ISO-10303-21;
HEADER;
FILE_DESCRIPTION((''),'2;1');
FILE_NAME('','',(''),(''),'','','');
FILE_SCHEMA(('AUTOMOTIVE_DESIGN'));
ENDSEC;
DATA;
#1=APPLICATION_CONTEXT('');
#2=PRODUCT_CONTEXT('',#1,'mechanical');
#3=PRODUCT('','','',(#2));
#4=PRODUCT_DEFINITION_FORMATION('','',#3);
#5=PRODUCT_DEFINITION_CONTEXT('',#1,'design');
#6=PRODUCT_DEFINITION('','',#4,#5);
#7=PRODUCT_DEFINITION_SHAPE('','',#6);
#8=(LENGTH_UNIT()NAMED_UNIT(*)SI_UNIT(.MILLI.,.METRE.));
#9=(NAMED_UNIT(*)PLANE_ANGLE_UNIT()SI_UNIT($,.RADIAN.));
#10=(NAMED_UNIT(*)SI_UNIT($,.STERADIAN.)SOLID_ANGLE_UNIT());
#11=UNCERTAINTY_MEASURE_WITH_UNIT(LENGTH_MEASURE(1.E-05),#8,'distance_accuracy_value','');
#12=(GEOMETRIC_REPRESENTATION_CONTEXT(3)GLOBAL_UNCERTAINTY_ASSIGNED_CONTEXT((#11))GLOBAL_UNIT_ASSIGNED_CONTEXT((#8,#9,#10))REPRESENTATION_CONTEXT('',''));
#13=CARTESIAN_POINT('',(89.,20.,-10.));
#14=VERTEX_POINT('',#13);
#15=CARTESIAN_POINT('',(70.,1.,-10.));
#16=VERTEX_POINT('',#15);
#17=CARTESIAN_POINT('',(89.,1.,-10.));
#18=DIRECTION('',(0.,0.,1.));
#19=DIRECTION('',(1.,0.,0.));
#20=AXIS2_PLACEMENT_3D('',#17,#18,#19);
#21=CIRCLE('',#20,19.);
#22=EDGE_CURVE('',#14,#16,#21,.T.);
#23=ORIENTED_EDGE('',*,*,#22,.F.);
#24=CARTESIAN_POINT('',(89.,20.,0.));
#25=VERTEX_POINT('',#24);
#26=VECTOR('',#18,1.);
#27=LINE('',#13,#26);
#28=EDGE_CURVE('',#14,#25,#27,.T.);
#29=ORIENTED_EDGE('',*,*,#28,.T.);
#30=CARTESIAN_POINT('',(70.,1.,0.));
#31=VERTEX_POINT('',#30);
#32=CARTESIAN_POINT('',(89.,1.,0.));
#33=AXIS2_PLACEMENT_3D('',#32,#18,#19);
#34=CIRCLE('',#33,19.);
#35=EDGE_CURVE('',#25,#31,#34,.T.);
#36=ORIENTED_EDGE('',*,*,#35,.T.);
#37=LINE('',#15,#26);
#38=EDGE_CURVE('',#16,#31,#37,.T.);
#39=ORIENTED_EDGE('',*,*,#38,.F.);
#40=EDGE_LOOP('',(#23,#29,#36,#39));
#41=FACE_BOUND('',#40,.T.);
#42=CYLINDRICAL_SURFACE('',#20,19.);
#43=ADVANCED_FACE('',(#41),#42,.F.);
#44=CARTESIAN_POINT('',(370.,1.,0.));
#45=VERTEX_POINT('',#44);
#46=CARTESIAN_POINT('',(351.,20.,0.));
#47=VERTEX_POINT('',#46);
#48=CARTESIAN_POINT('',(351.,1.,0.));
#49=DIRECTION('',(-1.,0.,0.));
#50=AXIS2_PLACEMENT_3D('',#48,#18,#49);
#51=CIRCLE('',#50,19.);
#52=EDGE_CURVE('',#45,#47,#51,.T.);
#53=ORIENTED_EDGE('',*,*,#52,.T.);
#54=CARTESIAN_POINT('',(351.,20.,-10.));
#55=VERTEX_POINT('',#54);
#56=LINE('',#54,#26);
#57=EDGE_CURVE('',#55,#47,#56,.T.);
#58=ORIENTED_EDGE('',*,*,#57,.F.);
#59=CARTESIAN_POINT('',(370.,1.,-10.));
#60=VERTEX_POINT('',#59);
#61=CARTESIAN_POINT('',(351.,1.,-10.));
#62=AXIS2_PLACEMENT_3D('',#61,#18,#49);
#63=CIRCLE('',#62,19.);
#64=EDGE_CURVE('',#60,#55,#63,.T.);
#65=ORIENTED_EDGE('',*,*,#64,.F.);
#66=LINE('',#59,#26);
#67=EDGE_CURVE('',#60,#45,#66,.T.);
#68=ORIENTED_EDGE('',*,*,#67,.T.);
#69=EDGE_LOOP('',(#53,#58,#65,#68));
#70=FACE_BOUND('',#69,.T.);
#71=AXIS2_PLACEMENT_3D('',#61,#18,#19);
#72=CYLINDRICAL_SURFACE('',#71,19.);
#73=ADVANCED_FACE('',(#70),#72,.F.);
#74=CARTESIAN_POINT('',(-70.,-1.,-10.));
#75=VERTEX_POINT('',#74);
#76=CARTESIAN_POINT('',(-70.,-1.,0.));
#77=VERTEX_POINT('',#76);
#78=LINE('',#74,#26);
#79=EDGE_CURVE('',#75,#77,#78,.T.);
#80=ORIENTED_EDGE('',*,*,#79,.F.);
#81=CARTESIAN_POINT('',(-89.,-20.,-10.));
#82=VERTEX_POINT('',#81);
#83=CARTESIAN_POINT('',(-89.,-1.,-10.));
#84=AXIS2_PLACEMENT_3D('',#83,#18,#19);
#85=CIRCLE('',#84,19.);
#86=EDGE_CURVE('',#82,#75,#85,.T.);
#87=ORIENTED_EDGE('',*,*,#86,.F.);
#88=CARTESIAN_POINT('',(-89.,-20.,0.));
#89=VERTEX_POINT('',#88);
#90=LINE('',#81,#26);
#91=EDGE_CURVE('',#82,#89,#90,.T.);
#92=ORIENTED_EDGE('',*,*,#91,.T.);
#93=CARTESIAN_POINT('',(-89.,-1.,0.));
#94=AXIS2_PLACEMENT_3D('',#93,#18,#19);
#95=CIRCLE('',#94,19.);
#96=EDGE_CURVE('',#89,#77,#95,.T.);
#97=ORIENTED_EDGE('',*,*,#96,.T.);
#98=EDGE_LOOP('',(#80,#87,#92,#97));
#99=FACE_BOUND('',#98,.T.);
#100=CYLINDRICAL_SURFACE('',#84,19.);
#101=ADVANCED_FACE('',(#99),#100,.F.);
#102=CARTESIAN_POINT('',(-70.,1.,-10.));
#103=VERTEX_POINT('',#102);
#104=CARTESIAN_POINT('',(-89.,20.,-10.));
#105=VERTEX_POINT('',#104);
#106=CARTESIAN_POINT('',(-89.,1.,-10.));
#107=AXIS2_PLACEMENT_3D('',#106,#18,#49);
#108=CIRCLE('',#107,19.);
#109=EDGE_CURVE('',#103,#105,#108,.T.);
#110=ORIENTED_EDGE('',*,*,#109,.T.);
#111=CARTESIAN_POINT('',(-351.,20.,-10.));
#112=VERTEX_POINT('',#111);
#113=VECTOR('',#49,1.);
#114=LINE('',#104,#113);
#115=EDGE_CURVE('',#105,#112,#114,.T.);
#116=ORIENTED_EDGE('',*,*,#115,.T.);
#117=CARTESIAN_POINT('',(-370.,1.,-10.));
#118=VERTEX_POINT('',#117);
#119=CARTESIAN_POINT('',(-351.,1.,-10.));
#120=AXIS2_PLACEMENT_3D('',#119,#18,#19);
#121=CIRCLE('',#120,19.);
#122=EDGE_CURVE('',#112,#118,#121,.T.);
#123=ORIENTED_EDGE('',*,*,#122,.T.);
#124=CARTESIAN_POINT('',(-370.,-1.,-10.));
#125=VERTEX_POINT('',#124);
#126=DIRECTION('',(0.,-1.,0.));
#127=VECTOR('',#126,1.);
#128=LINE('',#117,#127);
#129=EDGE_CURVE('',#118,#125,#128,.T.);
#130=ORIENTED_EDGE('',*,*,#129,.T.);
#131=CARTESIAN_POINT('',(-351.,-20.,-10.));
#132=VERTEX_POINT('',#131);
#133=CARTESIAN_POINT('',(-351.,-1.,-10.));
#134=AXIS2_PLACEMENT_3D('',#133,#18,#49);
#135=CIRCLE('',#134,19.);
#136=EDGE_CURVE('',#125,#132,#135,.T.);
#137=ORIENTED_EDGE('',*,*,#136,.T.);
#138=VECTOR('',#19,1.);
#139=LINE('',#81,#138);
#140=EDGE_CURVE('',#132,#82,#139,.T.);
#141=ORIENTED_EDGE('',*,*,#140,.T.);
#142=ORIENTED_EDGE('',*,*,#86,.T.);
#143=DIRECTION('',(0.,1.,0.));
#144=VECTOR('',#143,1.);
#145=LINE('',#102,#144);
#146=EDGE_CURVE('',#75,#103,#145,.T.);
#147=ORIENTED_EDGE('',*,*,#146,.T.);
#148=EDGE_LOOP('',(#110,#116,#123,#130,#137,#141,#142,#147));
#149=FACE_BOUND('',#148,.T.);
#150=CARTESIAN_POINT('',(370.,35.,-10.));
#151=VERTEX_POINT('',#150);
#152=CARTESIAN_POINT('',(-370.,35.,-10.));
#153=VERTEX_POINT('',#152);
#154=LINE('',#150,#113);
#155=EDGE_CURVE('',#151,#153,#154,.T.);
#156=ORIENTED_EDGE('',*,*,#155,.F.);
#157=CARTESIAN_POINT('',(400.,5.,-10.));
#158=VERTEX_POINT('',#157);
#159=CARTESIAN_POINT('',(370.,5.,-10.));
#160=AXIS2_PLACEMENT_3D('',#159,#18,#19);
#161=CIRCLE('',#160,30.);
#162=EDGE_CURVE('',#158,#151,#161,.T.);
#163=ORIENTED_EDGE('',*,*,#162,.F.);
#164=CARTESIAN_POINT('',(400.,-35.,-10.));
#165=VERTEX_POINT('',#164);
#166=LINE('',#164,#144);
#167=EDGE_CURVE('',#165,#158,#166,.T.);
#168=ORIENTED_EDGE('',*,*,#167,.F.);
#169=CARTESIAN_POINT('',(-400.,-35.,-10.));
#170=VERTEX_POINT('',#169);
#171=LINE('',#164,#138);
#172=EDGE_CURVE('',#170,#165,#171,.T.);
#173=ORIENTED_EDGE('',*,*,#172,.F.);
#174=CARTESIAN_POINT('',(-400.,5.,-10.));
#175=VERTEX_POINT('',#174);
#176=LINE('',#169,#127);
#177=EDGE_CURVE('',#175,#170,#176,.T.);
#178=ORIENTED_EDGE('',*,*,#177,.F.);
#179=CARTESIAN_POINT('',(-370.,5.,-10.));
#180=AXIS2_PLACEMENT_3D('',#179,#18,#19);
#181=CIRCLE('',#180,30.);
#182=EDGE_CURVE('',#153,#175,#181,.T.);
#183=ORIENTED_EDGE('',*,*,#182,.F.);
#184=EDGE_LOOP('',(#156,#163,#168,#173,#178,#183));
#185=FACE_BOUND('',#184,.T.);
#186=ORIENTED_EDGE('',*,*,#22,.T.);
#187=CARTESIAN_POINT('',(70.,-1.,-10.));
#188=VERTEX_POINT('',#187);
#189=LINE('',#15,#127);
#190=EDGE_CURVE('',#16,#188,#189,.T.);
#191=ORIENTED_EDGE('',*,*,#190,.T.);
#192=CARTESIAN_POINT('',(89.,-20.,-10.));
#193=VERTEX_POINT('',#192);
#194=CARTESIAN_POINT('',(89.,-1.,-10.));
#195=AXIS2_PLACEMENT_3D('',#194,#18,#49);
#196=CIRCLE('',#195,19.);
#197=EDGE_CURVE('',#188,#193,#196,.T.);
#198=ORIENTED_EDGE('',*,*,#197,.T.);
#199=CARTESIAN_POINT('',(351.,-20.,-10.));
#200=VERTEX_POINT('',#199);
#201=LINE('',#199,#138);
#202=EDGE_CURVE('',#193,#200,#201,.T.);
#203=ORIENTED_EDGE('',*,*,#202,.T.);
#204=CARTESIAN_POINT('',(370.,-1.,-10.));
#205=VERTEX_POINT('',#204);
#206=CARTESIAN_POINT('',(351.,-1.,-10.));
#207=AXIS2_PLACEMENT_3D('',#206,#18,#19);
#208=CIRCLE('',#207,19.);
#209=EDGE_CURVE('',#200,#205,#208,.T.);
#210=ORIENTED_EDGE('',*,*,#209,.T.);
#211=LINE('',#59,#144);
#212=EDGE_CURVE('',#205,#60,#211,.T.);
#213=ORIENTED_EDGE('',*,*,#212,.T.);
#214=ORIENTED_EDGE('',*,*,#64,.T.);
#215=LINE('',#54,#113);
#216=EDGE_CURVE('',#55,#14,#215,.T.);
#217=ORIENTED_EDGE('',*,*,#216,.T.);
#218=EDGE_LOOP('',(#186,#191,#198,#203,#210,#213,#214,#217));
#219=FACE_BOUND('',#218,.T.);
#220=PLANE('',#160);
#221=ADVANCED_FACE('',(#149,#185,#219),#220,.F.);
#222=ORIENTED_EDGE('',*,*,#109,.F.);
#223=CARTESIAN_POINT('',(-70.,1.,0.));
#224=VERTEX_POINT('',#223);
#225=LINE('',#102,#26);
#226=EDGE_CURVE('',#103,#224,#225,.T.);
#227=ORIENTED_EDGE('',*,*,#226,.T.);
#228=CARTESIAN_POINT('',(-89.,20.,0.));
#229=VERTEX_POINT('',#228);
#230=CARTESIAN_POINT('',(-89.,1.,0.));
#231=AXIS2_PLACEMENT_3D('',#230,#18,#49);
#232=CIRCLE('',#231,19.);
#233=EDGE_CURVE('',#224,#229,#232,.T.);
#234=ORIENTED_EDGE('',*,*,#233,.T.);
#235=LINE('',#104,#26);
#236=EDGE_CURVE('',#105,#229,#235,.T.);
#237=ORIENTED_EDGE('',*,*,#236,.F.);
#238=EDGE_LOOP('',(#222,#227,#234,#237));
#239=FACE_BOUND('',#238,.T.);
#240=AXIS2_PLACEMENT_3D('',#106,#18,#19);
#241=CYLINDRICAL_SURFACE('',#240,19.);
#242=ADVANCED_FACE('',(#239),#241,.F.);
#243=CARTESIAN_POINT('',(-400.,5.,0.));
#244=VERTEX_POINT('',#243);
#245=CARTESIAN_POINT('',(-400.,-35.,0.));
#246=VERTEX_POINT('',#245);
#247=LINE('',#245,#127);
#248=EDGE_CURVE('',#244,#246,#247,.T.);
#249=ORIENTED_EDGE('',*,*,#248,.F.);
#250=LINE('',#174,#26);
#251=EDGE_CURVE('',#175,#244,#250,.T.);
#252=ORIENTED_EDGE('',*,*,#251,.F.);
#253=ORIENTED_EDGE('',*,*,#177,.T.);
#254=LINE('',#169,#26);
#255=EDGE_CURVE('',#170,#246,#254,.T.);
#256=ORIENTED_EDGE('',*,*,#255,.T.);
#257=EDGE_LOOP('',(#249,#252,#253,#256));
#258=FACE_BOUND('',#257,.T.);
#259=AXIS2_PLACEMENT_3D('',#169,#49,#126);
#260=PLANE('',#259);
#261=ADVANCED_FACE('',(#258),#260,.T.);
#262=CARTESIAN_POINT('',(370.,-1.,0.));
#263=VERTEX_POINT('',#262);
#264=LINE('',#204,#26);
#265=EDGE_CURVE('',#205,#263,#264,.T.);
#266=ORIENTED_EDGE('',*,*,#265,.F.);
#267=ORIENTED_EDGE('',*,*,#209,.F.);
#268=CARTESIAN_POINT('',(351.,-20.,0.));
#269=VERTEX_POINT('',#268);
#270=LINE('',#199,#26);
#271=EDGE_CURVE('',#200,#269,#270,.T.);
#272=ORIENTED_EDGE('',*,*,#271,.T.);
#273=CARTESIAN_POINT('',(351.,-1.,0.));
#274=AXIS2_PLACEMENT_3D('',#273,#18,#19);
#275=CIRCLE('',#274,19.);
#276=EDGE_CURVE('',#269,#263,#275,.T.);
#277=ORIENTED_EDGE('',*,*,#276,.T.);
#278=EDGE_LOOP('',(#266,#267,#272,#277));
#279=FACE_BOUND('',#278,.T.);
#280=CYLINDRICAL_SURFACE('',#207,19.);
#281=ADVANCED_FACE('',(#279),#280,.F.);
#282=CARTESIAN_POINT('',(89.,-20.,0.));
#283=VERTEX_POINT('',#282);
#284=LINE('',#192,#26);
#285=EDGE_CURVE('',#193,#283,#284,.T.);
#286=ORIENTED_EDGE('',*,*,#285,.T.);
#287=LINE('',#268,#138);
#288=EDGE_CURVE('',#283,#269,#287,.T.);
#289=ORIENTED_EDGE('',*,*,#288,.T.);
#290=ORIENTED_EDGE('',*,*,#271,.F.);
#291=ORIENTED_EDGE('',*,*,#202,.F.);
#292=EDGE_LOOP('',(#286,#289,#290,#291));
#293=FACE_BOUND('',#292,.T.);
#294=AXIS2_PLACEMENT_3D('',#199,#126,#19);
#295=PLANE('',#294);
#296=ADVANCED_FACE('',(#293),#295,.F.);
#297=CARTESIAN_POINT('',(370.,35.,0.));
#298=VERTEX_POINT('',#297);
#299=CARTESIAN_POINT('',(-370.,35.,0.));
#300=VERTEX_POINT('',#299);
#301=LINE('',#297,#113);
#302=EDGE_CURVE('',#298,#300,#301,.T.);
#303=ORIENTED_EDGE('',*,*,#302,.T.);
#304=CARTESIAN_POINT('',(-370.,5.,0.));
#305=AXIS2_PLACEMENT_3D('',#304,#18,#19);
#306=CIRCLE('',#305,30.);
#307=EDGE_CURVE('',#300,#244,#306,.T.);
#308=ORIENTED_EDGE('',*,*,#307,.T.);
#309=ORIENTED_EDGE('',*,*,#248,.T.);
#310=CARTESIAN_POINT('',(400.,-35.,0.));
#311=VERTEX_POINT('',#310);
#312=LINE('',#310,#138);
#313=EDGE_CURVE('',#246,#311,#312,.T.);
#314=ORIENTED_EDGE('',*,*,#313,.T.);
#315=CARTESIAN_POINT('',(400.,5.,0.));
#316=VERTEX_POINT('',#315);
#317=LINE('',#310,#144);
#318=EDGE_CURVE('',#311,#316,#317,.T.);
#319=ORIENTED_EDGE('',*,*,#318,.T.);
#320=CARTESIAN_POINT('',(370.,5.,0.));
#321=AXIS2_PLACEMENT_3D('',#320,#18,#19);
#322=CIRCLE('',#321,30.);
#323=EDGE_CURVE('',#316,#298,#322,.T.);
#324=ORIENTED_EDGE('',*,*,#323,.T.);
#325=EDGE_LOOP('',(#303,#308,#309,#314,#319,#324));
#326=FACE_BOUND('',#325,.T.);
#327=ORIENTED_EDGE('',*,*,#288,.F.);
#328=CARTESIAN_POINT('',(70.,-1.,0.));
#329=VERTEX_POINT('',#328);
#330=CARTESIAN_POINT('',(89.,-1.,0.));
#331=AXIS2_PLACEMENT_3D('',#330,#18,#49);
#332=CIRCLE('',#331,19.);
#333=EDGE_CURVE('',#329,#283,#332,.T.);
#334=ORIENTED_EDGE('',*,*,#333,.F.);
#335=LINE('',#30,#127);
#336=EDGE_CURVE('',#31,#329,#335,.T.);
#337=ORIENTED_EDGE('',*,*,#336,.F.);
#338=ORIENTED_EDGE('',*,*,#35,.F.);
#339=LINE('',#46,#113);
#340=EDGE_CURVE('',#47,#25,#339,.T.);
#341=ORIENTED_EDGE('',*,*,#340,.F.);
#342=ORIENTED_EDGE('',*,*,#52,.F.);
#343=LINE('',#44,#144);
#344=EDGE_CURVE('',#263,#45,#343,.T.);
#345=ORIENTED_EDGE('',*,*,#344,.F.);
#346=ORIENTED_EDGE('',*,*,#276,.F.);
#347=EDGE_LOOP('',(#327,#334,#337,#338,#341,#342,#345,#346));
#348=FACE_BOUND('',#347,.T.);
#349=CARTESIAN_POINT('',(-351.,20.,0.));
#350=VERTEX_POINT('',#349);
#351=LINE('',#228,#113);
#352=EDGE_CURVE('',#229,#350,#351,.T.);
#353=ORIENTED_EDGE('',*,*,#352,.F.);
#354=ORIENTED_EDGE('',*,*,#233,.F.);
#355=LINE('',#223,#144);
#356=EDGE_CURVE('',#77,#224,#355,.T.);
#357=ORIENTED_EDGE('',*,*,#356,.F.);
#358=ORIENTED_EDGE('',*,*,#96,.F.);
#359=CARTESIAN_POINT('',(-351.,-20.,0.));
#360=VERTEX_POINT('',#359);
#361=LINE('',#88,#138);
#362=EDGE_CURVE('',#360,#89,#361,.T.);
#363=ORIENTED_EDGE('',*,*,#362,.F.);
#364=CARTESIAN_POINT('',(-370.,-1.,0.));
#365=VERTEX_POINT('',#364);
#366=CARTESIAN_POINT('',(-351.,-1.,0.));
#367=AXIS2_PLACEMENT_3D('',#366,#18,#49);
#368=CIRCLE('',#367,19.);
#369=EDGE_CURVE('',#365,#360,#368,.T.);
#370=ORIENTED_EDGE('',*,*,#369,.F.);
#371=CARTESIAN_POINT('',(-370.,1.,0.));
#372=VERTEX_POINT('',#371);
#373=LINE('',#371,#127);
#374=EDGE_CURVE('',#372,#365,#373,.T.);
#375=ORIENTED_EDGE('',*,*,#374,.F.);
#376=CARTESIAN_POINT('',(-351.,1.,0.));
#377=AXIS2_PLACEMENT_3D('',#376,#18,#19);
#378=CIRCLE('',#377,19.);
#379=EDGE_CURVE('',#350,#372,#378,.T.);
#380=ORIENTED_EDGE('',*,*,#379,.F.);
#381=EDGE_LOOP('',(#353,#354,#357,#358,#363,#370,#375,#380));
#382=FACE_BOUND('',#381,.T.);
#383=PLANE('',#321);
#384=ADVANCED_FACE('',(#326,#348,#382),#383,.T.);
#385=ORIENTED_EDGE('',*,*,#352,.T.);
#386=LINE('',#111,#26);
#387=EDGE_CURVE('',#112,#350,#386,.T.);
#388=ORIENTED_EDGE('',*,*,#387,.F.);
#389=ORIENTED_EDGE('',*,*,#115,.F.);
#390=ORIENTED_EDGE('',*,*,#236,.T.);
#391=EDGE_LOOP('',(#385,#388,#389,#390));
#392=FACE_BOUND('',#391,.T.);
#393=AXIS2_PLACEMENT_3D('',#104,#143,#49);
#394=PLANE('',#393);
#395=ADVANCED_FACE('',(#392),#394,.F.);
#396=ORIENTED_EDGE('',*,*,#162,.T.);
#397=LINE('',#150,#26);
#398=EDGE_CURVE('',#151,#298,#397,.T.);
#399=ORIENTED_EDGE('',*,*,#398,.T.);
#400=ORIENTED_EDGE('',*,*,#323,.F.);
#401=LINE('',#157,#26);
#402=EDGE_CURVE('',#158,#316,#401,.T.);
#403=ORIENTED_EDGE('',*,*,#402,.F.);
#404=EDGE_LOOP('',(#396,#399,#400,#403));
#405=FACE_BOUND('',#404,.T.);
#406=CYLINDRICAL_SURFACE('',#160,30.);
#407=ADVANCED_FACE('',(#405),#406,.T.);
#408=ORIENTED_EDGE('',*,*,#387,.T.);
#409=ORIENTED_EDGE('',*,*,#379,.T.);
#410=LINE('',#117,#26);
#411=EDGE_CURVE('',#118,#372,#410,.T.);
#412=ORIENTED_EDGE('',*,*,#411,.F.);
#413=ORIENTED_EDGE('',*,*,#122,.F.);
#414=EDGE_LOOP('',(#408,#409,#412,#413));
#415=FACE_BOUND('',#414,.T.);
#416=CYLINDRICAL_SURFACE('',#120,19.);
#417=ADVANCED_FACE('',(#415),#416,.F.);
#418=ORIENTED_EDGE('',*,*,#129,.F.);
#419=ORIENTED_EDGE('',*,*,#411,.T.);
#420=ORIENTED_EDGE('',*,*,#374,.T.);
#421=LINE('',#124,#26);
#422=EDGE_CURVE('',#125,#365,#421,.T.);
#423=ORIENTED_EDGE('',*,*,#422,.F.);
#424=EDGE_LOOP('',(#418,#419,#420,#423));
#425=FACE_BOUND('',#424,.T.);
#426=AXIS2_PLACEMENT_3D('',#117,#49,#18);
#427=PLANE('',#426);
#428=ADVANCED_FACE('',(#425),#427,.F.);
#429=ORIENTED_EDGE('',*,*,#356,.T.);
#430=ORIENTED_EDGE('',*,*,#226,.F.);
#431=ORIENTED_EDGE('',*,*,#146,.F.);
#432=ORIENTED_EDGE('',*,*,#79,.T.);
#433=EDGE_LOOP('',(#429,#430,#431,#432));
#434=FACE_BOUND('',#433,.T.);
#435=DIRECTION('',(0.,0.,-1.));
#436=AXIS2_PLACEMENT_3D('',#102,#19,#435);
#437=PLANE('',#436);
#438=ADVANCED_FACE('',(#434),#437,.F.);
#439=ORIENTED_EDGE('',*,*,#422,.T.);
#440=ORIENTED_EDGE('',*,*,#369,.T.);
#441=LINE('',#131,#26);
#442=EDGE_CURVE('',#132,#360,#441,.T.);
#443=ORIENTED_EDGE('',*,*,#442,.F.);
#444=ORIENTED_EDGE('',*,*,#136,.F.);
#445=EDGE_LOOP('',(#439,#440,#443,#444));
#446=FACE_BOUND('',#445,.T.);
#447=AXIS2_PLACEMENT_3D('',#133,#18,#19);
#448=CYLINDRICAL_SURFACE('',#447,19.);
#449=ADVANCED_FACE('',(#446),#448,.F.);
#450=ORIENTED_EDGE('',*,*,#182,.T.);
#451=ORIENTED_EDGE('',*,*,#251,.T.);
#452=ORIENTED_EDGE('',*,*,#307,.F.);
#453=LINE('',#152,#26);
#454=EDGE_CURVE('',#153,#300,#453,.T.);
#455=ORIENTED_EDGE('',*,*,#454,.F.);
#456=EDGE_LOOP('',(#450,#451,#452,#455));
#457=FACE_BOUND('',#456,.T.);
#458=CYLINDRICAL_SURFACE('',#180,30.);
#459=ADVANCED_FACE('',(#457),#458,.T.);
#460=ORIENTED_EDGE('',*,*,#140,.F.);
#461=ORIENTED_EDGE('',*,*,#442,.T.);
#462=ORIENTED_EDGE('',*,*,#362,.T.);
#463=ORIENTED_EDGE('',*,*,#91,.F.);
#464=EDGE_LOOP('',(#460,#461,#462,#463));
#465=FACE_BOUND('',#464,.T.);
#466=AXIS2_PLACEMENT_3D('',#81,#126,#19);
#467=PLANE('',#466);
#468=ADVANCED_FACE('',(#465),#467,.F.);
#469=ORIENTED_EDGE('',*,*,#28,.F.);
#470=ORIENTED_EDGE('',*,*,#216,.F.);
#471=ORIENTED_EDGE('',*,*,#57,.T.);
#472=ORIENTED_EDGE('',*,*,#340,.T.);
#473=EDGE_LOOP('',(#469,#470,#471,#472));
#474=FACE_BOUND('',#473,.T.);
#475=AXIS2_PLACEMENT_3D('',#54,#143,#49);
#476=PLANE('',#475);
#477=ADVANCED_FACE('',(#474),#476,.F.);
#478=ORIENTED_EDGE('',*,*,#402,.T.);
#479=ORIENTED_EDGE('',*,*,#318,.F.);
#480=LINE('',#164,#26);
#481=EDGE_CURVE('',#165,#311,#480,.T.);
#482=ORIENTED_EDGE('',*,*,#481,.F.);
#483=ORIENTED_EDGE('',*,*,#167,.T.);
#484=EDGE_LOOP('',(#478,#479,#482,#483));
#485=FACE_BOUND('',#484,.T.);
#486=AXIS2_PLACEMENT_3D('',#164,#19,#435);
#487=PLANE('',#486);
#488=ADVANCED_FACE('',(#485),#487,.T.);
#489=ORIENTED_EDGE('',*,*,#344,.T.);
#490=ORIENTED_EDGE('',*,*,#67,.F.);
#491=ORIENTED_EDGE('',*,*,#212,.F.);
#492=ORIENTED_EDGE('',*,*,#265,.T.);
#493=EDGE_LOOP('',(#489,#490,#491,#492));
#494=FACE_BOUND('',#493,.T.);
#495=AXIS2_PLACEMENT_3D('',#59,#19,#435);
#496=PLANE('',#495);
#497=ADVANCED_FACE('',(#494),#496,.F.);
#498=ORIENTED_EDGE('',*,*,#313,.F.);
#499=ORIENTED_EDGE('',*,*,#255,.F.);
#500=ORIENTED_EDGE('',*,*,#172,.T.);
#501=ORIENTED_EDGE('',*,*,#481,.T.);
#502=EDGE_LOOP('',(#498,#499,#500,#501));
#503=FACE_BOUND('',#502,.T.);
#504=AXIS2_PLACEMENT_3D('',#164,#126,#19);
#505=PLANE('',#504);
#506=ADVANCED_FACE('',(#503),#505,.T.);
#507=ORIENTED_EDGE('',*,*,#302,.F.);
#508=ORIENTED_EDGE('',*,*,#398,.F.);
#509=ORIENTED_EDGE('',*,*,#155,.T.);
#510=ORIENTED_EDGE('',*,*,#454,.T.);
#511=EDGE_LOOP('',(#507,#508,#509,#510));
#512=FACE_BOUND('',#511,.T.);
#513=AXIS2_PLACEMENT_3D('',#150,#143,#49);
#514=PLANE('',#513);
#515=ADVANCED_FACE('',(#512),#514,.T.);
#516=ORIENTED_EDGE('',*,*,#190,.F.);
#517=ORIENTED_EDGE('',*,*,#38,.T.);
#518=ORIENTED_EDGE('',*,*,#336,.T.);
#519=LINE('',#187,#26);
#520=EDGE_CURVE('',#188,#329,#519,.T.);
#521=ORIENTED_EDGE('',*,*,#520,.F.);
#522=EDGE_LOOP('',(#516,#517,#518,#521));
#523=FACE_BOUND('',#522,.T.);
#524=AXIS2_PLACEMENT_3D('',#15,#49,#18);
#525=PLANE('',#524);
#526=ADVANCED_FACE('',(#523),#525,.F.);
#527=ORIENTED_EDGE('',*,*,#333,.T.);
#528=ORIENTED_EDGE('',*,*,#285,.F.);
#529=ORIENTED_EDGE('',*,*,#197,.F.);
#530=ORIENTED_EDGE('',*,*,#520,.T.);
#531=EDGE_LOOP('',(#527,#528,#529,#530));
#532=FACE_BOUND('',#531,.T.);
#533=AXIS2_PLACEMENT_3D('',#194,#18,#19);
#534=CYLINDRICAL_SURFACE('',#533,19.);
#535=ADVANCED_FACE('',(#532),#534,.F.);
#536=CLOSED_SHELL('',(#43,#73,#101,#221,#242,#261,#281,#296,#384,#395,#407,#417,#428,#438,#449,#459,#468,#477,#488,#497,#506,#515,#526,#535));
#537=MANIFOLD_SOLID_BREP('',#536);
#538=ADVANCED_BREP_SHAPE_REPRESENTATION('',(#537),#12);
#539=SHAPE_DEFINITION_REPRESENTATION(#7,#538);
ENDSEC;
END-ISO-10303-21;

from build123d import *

# Parameters (mm, degrees)
TABAN_FLAN_1_DEPTH = 10


# Sheet-metal steps are written as plain solids
with BuildPart() as part:
    # Çizim1 → Taban-Flanş1 (new body)
    with BuildSketch(Plane.XY):
        with BuildLine():
            Line((400, -35), (-400, -35))
            Line((-400, -35), (-400, 5))
            ThreePointArc((-400, 5), (-391.213203436, 26.213203436), (-370, 35))
            Line((-370, 35), (370, 35))
            ThreePointArc((370, 35), (391.213203436, 26.213203436), (400, 5))
            Line((400, 5), (400, -35))
        make_face()
        with BuildLine():
            Line((351, 20), (89, 20))
            ThreePointArc((89, 20), (75.564971157, 14.435028843), (70, 1))
            Line((70, 1), (70, -1))
            ThreePointArc((70, -1), (75.564971157, -14.435028843), (89, -20))
            Line((89, -20), (351, -20))
            ThreePointArc((351, -20), (364.435028843, -14.435028843), (370, -1))
            Line((370, -1), (370, 1))
            ThreePointArc((370, 1), (364.435028843, 14.435028843), (351, 20))
        make_face(mode=Mode.SUBTRACT)
        with BuildLine():
            Line((-70, 1), (-70, -1))
            ThreePointArc((-70, -1), (-75.564971157, -14.435028843), (-89, -20))
            Line((-89, -20), (-351, -20))
            ThreePointArc((-351, -20), (-364.435028843, -14.435028843), (-370, -1))
            Line((-370, -1), (-370, 1))
            ThreePointArc((-370, 1), (-364.435028843, 14.435028843), (-351, 20))
            Line((-351, 20), (-89, 20))
            ThreePointArc((-89, 20), (-75.564971157, 14.435028843), (-70, 1))
        make_face(mode=Mode.SUBTRACT)
    extrude(amount=-TABAN_FLAN_1_DEPTH)


solid = part.part
